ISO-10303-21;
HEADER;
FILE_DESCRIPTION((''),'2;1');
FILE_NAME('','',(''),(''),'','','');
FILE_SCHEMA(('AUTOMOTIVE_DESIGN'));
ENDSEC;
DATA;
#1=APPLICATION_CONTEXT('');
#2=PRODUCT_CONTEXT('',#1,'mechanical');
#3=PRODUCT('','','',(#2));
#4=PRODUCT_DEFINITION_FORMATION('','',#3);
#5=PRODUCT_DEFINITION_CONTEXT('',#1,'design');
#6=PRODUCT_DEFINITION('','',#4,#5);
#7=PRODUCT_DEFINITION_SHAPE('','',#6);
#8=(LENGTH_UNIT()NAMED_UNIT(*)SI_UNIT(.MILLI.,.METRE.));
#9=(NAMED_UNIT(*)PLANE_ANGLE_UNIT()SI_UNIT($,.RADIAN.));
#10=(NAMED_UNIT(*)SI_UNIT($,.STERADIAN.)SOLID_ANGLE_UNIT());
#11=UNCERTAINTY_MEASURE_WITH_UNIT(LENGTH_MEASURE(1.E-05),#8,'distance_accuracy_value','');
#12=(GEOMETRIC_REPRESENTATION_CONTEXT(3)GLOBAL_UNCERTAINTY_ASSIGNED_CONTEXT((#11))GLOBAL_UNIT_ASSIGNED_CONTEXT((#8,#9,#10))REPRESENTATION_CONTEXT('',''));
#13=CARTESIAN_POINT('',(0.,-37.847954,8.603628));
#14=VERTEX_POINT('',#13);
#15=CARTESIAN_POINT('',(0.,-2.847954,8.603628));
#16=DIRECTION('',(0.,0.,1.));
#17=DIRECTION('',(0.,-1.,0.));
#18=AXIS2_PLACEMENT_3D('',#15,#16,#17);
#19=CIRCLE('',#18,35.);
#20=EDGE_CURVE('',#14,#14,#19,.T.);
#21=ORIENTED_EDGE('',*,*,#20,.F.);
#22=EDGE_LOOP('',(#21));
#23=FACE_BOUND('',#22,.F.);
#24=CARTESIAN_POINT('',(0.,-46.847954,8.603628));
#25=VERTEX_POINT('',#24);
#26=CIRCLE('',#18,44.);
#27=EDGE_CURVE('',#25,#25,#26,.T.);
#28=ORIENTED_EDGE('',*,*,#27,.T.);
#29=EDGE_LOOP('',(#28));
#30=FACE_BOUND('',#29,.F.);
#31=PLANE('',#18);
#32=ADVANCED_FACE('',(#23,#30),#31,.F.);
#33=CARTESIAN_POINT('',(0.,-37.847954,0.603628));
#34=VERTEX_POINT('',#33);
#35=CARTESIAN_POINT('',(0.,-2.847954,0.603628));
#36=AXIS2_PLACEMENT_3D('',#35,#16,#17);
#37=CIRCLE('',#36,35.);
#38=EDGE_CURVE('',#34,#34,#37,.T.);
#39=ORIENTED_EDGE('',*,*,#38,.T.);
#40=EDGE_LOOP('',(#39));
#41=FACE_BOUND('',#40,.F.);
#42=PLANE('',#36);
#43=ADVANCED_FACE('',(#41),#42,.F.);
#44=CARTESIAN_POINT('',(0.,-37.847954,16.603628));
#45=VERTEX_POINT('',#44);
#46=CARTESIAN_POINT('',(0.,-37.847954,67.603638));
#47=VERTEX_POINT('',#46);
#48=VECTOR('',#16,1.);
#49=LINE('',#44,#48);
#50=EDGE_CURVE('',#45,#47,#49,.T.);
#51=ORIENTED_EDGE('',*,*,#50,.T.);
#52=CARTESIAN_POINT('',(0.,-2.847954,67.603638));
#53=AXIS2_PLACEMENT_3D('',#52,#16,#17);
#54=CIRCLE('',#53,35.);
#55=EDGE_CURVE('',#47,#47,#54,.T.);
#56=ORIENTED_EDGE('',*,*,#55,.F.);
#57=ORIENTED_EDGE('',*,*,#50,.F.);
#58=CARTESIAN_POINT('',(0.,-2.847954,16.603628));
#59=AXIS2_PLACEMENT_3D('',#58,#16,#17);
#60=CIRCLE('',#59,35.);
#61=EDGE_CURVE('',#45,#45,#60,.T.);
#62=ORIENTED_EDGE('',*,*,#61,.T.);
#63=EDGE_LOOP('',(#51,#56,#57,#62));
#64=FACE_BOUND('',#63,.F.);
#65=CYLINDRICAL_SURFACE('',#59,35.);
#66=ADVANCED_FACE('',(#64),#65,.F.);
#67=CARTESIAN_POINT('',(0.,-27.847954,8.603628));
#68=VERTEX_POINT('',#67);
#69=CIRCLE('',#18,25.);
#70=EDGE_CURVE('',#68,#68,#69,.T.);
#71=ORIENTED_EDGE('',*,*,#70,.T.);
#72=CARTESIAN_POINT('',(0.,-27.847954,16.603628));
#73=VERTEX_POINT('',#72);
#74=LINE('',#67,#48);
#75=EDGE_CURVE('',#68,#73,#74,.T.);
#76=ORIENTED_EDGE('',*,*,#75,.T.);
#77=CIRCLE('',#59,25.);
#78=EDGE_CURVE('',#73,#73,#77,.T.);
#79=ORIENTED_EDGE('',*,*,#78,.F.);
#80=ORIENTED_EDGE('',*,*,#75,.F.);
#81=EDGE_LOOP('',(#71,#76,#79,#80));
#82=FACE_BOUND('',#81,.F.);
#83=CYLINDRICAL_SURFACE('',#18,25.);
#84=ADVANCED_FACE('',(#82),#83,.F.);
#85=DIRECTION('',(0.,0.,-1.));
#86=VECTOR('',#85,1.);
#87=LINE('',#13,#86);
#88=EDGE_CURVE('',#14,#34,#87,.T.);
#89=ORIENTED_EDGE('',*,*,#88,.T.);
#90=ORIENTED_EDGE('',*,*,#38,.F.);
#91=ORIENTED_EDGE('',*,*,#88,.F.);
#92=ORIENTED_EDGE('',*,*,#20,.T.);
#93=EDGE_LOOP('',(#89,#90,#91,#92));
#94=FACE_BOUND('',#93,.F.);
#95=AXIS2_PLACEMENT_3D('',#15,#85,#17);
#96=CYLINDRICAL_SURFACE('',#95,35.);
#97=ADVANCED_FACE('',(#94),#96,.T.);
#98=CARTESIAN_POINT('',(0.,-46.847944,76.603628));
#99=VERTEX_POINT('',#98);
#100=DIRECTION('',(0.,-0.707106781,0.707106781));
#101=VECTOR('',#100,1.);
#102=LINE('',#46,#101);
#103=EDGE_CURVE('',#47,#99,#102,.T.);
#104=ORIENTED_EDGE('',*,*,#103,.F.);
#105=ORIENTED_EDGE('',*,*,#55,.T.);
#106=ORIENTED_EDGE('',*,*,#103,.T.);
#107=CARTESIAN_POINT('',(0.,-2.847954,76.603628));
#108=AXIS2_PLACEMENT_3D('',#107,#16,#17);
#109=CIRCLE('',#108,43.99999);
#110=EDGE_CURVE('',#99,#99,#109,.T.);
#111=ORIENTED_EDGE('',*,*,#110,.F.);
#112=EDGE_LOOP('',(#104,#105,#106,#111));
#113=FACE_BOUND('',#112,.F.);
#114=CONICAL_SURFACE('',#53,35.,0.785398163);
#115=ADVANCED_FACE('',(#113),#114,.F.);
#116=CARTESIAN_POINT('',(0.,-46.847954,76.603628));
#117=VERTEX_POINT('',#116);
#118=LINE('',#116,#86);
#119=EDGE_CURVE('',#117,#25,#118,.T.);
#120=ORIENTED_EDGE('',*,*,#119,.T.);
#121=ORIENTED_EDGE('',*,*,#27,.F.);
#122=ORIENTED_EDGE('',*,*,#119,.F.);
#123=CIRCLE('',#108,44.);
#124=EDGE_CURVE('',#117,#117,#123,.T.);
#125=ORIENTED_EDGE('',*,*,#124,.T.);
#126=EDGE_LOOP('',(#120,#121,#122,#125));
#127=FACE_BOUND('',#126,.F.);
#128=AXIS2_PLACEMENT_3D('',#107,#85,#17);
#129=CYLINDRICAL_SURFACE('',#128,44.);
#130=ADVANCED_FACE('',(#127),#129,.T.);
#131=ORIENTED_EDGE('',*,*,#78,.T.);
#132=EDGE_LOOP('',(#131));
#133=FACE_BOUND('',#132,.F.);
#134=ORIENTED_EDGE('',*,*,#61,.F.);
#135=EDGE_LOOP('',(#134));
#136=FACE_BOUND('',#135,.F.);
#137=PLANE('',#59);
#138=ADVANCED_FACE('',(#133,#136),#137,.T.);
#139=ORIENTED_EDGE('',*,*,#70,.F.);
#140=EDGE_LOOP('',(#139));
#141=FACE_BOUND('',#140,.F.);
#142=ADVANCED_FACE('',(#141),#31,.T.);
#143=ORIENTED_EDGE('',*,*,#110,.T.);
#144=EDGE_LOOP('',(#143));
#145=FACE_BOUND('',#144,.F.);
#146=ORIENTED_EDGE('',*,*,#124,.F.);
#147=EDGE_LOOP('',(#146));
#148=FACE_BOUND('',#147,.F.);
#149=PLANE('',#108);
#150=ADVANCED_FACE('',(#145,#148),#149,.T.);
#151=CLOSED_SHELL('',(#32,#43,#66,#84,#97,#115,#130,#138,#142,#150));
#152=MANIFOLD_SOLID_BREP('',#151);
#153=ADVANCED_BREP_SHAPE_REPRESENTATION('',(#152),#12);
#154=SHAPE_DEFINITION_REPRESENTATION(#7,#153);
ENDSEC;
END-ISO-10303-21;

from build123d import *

# Parameters (mm, degrees)
F2_SIZE = 8.99999


# Not quite as in the source:
# - a fillet or chamfer is up to 0.001 mm smaller than in the source, because OpenCascade refuses the exact size


with BuildPart() as f1:
    # F0 (on Right) → F1 (revolve)
    with BuildSketch(Plane.YZ):
        Polygon((-37.8479540345, 16.603627705), (-37.8479540345, 76.603627705), (-46.8479540345, 76.603627705), (-46.8479540345, 8.603627705), (-37.8479540345, 8.603627705), (-37.8479540345, 0.603627705), (-2.8479540345, 0.603627705), (-2.8479540345, 8.603627705), (-27.8479540345, 8.603627705), (-27.8479540345, 16.603627705), align=None)
    revolve(axis=Axis((0, -2.8479540345, 4.603627705), (0, 0, 1)))

    # F2 (size 9 in the source; OpenCascade refuses exactly that, so slightly less here)
    f2_edges = [f1.edges().sort_by_distance(p)[0] for p in [
        (0, 32.152046, 76.603628),
    ]]
    chamfer(f2_edges, length=F2_SIZE)


solid = f1.part
